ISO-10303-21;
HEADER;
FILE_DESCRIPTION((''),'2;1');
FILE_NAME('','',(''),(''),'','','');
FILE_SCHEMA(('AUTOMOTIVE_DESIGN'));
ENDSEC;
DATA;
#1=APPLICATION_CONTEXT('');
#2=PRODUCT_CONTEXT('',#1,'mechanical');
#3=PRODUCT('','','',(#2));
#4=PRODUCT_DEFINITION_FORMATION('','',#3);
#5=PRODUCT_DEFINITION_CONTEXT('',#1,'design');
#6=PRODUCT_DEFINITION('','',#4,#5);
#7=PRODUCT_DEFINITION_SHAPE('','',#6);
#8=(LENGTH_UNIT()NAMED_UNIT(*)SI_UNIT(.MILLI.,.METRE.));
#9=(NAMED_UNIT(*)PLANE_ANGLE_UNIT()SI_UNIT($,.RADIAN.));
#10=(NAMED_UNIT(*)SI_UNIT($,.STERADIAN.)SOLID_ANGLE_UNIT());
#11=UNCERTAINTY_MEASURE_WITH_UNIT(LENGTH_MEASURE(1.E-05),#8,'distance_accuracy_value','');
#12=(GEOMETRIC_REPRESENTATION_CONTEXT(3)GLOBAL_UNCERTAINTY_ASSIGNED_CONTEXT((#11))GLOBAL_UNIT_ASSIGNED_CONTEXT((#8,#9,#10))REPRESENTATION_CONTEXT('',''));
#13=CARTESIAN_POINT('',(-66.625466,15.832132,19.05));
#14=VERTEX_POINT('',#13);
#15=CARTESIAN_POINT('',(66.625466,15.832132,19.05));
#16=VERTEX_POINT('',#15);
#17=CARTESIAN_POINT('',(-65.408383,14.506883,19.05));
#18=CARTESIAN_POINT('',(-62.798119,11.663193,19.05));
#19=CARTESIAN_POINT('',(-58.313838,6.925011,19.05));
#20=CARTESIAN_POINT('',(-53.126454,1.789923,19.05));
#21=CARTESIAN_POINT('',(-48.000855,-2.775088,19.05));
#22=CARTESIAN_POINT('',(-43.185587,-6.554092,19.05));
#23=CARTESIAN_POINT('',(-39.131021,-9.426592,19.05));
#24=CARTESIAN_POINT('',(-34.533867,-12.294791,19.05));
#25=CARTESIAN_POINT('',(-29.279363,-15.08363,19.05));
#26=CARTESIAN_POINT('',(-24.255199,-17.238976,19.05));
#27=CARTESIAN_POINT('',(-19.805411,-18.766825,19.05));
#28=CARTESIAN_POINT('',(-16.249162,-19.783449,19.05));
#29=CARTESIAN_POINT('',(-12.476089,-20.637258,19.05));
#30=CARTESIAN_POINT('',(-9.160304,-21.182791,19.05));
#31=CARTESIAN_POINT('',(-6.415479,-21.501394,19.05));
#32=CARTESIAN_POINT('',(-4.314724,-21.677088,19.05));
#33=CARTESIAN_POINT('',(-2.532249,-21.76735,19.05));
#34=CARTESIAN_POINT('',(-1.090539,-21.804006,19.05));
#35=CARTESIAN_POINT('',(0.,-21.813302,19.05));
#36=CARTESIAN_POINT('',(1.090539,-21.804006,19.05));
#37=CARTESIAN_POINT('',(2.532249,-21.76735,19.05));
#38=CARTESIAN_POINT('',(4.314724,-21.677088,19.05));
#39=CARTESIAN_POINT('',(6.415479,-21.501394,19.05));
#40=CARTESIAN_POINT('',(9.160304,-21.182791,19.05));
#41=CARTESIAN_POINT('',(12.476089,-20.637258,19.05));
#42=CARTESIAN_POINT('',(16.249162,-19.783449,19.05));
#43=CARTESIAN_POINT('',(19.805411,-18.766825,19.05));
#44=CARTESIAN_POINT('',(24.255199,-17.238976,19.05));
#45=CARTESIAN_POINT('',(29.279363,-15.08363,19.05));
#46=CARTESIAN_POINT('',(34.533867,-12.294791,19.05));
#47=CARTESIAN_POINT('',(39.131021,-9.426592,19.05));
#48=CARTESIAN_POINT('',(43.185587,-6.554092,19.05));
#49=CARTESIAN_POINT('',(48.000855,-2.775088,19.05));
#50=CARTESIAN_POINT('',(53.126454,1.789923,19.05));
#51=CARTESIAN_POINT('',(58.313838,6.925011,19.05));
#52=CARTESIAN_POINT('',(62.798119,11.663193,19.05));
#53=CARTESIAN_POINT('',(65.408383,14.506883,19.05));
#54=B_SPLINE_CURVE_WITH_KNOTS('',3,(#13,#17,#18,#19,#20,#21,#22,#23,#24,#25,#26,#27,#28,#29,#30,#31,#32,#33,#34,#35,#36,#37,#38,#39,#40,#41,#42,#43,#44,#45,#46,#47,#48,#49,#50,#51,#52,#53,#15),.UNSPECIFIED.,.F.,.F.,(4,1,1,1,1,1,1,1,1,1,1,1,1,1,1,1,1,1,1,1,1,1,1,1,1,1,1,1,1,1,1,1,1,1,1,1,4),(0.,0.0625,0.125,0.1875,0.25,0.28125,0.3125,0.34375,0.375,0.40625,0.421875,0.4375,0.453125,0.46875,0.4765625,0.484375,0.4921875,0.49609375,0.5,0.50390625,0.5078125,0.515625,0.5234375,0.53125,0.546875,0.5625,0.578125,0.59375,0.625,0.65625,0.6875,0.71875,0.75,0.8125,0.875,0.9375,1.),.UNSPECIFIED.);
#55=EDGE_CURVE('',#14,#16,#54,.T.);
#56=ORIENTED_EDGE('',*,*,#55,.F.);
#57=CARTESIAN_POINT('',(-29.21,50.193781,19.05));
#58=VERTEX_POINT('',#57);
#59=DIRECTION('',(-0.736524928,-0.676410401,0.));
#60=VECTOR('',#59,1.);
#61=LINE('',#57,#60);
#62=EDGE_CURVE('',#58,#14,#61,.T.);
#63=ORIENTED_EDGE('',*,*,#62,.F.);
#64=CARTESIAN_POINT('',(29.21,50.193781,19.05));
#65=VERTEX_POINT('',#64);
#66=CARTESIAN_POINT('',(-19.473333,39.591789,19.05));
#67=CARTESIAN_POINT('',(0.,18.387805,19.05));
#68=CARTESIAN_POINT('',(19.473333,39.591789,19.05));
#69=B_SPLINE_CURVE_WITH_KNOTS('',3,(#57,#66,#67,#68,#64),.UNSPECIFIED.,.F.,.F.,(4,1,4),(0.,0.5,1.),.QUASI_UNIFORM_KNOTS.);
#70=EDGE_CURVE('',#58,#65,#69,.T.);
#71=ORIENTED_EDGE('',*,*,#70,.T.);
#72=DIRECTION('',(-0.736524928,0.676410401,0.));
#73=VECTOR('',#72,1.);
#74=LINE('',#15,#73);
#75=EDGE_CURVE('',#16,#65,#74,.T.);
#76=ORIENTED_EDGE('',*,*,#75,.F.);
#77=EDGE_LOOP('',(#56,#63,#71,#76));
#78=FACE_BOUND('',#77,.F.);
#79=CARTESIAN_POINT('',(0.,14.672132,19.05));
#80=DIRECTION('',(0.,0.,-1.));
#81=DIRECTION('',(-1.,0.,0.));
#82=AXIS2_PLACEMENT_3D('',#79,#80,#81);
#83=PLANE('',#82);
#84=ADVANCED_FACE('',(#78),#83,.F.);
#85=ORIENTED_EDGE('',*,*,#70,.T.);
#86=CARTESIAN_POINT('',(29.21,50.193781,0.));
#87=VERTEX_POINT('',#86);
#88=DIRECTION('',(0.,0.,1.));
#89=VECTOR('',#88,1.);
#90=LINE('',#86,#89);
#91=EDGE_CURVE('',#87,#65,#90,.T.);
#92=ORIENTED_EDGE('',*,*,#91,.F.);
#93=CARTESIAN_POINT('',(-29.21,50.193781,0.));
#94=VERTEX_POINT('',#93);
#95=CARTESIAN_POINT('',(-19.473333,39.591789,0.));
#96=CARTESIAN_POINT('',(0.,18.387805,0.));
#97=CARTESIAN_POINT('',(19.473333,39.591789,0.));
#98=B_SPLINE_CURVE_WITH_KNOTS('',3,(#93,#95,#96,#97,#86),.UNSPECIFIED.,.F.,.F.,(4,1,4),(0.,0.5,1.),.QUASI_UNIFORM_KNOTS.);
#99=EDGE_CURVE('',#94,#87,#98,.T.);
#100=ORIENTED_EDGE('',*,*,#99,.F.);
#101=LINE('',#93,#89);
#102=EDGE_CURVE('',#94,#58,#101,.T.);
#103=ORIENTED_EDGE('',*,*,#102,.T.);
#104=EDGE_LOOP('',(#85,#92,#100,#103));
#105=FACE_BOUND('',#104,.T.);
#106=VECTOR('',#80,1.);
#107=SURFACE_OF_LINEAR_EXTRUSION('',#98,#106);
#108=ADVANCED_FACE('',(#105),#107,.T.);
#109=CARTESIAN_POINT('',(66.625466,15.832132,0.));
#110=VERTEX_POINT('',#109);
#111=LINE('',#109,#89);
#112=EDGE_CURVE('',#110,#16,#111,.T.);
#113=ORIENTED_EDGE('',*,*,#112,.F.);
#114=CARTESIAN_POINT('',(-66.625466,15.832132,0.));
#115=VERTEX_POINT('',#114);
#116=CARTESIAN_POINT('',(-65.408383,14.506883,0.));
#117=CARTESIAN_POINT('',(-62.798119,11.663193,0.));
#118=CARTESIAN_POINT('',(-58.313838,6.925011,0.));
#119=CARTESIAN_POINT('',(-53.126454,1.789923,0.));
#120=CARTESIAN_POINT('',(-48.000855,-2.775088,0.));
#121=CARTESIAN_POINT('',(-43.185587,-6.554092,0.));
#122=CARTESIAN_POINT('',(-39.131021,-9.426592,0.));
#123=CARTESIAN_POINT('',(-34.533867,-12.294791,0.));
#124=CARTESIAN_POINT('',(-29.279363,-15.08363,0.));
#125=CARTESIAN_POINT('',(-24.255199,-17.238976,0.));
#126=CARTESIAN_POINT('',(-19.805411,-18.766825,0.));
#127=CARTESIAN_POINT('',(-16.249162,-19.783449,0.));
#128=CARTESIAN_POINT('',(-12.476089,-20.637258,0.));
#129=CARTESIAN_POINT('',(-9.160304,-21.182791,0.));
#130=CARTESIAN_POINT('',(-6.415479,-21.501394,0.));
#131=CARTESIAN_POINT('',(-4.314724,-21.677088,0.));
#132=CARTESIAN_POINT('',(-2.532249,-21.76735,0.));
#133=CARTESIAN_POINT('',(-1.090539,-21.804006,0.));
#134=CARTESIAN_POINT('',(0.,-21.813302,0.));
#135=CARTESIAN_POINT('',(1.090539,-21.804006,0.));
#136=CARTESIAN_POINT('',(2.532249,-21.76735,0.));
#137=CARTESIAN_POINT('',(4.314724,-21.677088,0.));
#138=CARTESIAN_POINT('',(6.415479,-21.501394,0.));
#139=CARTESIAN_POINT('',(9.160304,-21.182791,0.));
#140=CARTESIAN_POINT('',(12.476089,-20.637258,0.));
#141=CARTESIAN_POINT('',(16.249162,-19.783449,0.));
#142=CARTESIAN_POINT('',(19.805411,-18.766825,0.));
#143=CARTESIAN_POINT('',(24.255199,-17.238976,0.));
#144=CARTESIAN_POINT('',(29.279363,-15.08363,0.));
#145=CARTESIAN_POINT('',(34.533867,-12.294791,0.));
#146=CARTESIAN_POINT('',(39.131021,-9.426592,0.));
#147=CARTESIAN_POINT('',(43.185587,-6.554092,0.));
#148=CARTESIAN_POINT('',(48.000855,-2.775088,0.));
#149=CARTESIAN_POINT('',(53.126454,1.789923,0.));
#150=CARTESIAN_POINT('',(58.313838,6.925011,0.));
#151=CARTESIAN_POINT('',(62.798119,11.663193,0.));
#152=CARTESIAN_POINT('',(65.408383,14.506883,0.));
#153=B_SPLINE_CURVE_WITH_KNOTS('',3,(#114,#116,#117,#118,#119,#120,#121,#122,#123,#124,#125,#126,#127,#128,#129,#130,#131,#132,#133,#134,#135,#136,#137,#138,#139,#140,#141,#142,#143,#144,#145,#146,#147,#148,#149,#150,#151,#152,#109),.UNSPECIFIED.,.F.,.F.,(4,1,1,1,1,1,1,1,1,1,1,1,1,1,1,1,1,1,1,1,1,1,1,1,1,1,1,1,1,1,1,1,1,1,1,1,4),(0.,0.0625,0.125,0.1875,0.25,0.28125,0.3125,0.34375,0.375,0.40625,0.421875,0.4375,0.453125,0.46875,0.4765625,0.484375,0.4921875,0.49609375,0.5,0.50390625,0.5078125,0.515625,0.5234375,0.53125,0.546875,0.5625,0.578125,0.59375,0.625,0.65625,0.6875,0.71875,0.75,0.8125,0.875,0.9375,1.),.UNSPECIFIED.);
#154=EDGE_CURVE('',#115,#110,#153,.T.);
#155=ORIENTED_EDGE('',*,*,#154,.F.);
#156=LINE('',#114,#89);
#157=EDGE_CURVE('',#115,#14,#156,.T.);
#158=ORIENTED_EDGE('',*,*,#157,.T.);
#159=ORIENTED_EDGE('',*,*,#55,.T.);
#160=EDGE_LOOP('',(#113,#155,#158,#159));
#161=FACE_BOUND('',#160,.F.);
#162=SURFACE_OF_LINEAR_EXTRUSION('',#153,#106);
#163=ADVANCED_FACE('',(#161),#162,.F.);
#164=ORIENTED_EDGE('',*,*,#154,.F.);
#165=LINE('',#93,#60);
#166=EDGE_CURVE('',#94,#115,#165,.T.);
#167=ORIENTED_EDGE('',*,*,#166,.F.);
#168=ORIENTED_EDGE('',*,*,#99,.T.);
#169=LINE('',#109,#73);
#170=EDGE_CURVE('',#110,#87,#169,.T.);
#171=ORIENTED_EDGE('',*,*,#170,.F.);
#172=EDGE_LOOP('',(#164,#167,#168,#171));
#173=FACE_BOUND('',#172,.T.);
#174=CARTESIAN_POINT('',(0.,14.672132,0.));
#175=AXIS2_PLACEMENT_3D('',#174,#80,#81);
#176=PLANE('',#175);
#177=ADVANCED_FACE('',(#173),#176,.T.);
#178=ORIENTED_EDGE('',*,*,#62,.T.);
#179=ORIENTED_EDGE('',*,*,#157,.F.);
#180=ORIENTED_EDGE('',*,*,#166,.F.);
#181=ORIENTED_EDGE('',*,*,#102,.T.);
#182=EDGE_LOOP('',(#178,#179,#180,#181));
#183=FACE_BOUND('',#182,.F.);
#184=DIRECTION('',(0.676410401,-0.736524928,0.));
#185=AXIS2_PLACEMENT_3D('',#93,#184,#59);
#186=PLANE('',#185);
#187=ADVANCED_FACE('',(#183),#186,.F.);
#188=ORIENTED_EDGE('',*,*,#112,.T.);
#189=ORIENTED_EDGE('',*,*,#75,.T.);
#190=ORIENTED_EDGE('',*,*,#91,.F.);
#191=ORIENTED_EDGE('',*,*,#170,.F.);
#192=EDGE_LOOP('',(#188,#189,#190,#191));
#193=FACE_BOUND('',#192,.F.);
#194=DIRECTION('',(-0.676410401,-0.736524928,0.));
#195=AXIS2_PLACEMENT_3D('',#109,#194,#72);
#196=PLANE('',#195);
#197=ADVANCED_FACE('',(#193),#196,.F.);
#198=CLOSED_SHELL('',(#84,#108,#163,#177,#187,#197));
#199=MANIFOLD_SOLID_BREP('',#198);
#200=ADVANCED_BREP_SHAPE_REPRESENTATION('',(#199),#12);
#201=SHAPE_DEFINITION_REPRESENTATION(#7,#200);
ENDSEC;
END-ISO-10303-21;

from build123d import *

# Parameters (mm, degrees)
F1_DEPTH = 19.05


# Not quite as in the source:
# - the dataset's text gives a spline's control points without its knots; the knots are read off the source's solid


with BuildPart() as f1:
    # F0 (on Top) → F1 (new body)
    with BuildSketch(Plane.XY):
        with BuildLine():
            add(Edge.make_bspline(
                [(-29.21, 50.1937808475), (-19.4733333333, 39.5917887583), (0, 18.38780458), (19.4733333333, 39.5917887583), (29.21, 50.1937808475)],
                knots=[0, 0, 0, 0, 0.5, 1, 1, 1, 1], degree=3))
            Line((-29.21, 50.1937808475), (-66.6254663511, 15.8321324917))
            add(Edge.make_bspline(
                [(-66.6254663511, 15.8321324917), (-65.4083830178, 14.5068834805), (-62.798118937, 11.6631929013), (-58.313838197, 6.9250114854), (-53.1264544051, 1.7899227882), (-48.0008550127, -2.7750884656), (-43.1855874656, -6.5540915551), (-39.1310205383, -9.4265922107), (-34.5338667026, -12.2947905426), (-29.2793634388, -15.0836296108), (-24.2551988213, -17.2389760424), (-19.805410967, -18.7668245668), (-16.2491616584, -19.783449029), (-12.4760888182, -20.637258157), (-9.1603044553, -21.1827909222), (-6.4154794436, -21.5013942758), (-4.3147237261, -21.677087596), (-2.5322491694, -21.7673504521), (-1.0905389143, -21.8040063692), (0, -21.8133018117), (1.0905389143, -21.8040063692), (2.5322491694, -21.7673504521), (4.3147237261, -21.677087596), (6.4154794436, -21.5013942758), (9.1603044553, -21.1827909222), (12.4760888182, -20.637258157), (16.2491616584, -19.783449029), (19.805410967, -18.7668245668), (24.2551988213, -17.2389760424), (29.2793634388, -15.0836296108), (34.5338667026, -12.2947905426), (39.1310205383, -9.4265922107), (43.1855874656, -6.5540915551), (48.0008550127, -2.7750884656), (53.1264544051, 1.7899227882), (58.313838197, 6.9250114854), (62.798118937, 11.6631929013), (65.4083830178, 14.5068834805), (66.6254663511, 15.8321324917)],
                knots=[0, 0, 0, 0, 0.0625, 0.125, 0.1875, 0.25, 0.28125, 0.3125, 0.34375, 0.375, 0.40625, 0.421875, 0.4375, 0.453125, 0.46875, 0.4765625, 0.484375, 0.4921875, 0.49609375, 0.5, 0.50390625, 0.5078125, 0.515625, 0.5234375, 0.53125, 0.546875, 0.5625, 0.578125, 0.59375, 0.625, 0.65625, 0.6875, 0.71875, 0.75, 0.8125, 0.875, 0.9375, 1, 1, 1, 1], degree=3))
            Line((66.6254663511, 15.8321324917), (29.21, 50.1937808475))
        make_face()
    extrude(amount=F1_DEPTH)


solid = f1.part
